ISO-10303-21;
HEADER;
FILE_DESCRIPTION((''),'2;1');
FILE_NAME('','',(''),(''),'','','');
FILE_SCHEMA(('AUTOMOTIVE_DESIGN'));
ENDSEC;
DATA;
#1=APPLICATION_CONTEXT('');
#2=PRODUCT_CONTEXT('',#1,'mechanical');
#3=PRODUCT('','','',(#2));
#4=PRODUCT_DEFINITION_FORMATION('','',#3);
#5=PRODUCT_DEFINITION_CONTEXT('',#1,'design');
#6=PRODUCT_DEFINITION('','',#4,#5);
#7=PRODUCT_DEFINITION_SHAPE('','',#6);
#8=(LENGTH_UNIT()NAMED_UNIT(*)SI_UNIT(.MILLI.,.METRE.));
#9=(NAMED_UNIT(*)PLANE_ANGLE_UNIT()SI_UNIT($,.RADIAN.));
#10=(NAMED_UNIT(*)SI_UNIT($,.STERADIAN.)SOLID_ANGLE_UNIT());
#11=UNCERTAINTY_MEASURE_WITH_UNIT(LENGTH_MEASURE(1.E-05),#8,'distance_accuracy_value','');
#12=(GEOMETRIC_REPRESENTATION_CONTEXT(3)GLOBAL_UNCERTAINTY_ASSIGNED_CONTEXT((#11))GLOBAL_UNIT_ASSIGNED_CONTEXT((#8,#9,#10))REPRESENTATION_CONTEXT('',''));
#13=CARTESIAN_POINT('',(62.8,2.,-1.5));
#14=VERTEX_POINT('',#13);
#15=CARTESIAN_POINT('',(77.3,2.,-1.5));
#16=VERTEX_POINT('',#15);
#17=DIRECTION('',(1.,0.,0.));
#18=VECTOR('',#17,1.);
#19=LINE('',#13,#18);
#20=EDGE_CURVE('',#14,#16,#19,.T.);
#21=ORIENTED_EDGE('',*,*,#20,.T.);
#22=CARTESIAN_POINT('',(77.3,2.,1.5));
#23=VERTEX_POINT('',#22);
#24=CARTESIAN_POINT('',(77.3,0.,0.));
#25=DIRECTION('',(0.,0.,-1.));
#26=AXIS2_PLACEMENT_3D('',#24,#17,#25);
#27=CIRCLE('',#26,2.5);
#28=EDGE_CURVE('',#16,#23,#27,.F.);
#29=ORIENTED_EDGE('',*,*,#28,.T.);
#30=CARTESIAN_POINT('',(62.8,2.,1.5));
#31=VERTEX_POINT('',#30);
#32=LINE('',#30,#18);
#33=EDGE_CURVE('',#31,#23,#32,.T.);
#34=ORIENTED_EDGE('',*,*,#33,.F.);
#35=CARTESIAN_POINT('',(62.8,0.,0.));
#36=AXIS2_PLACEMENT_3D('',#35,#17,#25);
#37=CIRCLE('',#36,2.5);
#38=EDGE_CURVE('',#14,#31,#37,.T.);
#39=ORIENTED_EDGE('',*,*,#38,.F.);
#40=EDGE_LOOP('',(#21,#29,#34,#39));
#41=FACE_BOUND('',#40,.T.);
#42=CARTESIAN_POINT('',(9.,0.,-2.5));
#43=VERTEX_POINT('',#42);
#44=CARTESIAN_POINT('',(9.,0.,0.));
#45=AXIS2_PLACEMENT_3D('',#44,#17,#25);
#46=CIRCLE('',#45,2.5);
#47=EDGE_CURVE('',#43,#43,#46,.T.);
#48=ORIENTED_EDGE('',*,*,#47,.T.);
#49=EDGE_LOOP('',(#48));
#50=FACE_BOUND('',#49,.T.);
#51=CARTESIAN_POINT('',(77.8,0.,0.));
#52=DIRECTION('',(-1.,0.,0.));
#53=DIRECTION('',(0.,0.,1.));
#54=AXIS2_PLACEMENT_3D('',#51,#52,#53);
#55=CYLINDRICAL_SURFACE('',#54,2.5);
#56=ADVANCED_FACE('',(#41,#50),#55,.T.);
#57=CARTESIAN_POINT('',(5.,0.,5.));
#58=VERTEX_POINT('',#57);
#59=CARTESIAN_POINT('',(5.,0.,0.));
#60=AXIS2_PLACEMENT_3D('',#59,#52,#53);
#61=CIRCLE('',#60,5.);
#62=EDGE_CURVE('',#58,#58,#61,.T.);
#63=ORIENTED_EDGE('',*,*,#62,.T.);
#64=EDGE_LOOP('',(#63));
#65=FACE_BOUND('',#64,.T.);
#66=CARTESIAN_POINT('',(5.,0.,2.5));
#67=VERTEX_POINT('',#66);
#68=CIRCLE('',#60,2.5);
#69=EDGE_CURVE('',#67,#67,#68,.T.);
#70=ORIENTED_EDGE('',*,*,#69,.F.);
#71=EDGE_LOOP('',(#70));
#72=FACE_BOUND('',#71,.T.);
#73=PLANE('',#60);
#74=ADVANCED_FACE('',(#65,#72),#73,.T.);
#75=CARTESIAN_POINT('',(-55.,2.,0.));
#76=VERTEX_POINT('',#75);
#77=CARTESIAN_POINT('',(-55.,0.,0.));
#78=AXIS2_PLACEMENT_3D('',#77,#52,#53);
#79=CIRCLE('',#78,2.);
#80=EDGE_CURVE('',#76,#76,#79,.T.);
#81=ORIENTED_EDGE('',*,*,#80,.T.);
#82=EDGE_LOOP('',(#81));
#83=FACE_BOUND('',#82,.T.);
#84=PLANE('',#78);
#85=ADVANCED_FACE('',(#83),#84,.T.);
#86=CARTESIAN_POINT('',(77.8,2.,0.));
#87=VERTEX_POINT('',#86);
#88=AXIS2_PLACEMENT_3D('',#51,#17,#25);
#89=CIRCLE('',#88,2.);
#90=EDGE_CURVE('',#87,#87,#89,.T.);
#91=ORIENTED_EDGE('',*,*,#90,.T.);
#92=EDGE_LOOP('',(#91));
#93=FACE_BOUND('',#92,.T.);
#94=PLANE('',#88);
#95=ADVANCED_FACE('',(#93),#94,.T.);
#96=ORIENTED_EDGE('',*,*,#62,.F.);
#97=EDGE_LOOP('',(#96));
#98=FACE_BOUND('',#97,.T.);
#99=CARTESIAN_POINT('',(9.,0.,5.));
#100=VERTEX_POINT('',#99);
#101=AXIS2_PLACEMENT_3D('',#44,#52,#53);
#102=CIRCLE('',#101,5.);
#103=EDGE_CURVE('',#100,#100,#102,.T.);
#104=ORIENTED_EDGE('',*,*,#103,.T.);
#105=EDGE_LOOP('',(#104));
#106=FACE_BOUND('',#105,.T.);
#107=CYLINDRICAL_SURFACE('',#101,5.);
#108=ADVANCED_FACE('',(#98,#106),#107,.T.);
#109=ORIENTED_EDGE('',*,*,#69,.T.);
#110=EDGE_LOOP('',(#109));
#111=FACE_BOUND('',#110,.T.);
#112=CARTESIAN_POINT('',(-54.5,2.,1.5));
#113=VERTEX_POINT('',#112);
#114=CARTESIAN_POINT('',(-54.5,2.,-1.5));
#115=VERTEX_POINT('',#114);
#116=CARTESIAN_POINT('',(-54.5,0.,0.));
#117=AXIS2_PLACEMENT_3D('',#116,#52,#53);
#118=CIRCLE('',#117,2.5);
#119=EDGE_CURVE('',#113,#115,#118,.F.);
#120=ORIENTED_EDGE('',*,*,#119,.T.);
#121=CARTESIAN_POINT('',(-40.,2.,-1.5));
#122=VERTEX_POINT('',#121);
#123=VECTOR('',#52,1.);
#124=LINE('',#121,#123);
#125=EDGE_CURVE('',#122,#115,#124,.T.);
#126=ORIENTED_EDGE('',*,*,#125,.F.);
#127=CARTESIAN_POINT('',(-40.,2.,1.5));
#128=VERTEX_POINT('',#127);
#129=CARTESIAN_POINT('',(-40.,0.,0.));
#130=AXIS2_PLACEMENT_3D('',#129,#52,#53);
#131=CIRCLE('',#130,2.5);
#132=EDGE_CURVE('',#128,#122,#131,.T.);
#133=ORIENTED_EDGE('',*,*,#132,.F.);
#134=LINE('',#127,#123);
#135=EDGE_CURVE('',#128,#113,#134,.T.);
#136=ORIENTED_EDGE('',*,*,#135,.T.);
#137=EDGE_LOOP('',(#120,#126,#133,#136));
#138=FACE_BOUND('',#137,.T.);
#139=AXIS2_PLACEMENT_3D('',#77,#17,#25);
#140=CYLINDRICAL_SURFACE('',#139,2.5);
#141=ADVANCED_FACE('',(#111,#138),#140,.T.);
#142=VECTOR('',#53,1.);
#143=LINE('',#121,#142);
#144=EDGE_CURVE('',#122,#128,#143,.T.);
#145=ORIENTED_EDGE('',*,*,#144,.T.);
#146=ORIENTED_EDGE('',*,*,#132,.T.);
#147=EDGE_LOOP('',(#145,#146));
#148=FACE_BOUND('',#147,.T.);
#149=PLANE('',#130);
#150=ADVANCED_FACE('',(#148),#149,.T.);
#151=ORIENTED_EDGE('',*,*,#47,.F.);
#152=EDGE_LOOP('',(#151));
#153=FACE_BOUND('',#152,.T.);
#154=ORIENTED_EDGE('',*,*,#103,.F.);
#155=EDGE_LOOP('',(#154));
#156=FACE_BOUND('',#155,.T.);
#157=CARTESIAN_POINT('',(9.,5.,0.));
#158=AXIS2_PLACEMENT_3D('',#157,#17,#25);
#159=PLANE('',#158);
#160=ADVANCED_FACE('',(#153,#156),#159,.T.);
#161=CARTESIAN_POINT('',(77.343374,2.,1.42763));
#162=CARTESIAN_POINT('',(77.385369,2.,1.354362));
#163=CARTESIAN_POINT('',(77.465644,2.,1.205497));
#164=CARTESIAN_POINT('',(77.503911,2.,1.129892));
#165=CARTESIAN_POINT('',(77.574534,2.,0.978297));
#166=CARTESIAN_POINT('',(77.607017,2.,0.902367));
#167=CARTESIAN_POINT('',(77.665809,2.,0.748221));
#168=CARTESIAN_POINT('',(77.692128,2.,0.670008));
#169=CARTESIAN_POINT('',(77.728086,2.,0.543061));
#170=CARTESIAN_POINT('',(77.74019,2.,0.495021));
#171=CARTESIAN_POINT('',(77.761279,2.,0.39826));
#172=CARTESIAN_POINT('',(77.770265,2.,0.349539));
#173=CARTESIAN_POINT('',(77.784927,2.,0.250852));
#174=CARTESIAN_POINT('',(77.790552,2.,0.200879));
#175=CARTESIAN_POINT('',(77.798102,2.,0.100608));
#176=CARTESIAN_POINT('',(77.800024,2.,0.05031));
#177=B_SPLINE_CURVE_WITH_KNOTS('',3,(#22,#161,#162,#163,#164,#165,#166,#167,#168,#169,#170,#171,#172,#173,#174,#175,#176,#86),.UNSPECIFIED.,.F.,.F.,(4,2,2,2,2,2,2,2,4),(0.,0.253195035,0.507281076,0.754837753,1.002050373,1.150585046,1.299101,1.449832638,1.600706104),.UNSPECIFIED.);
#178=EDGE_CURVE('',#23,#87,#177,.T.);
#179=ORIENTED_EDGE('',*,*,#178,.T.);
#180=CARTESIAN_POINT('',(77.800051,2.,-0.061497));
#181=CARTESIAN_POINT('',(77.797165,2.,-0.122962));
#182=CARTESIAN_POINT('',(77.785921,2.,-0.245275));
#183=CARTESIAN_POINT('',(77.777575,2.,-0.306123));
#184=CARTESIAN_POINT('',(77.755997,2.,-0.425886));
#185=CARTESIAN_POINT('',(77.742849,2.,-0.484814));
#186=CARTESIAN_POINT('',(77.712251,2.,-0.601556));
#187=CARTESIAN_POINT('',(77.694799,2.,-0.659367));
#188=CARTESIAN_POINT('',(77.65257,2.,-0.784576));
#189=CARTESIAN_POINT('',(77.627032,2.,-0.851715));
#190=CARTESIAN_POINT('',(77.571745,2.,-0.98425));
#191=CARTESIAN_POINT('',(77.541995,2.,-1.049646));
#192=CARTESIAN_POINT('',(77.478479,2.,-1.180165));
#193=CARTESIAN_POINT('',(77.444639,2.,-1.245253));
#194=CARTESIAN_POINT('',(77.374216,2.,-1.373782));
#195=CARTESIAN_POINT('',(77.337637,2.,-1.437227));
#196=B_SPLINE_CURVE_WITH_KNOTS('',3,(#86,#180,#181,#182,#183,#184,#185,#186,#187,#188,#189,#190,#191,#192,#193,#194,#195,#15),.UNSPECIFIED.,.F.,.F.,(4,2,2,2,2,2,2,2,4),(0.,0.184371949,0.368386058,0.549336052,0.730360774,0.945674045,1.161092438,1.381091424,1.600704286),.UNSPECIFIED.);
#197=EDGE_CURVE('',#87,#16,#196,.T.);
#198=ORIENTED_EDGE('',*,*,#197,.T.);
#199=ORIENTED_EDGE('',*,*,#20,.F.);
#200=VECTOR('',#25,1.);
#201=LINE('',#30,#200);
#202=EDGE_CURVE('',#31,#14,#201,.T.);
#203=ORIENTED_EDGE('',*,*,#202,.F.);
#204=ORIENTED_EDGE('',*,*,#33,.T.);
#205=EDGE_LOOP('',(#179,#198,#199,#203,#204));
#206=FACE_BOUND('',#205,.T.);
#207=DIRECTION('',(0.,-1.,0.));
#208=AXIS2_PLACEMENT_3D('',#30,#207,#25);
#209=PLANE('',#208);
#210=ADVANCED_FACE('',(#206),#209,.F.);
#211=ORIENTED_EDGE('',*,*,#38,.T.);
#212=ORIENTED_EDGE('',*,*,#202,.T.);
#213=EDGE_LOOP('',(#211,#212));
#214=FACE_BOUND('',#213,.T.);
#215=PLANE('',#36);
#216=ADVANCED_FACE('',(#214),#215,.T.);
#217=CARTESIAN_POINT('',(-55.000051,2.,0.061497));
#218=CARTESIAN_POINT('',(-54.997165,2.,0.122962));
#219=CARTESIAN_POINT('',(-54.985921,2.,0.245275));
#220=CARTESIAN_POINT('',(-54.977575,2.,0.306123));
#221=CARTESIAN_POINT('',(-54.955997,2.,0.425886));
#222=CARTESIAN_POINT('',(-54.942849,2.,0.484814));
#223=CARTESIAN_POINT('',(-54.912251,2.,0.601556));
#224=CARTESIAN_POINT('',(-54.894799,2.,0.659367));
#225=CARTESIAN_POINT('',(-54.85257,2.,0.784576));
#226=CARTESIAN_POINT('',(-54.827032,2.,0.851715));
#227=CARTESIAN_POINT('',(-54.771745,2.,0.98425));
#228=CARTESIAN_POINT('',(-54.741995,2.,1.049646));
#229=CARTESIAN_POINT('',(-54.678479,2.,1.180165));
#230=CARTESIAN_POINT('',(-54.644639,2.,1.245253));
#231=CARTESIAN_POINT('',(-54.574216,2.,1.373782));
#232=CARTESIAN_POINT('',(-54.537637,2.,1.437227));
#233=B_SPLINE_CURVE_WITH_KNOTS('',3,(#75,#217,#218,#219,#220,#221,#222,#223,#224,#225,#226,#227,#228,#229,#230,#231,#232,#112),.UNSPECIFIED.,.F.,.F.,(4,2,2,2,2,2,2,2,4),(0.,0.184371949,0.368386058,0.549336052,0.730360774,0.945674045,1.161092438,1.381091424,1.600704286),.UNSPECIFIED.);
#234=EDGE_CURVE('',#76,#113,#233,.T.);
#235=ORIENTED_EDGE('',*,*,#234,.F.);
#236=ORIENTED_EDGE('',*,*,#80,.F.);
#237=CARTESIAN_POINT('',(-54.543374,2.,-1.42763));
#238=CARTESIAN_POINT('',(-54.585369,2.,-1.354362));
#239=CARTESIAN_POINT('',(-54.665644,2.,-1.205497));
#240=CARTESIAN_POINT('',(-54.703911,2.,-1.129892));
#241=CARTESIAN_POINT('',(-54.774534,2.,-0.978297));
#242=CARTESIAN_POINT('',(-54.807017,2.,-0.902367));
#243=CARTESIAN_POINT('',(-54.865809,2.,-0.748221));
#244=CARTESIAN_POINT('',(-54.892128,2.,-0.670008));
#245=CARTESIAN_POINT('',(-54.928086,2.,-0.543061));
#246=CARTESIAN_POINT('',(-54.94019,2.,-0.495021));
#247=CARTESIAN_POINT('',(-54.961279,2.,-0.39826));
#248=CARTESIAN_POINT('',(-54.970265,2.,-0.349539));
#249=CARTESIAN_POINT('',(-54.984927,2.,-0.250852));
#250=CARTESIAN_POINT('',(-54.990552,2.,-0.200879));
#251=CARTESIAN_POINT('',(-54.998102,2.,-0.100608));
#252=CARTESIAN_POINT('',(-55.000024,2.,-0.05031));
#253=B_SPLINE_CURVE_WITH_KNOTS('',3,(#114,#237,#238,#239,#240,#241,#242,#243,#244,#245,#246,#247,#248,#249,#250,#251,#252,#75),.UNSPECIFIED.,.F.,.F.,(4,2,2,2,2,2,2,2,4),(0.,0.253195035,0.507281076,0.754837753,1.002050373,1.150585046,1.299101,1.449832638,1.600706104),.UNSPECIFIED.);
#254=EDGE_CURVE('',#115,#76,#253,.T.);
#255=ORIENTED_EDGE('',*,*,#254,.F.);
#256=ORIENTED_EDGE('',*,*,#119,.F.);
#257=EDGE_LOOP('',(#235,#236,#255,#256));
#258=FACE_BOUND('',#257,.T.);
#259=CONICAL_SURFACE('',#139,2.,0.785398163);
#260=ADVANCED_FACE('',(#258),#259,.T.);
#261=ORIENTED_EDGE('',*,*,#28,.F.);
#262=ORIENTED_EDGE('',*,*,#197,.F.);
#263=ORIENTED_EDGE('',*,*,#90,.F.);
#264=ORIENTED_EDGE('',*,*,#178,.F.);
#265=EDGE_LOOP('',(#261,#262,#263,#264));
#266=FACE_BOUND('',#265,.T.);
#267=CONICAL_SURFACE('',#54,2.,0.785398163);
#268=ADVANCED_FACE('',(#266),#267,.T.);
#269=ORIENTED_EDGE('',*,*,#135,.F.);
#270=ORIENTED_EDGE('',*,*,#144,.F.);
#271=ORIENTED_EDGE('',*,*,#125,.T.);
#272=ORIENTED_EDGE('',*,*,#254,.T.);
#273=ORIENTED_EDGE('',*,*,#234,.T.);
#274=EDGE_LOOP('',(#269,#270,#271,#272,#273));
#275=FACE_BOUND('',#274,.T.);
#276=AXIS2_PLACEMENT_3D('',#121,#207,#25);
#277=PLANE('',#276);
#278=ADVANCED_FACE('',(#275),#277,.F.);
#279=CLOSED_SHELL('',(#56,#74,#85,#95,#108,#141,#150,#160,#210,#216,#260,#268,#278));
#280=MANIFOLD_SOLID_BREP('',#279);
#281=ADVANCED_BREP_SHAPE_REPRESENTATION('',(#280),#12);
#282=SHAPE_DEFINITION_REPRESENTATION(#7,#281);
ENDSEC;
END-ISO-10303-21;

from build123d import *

# Parameters (mm, degrees)
SKETCH1_W           = 4
SKETCH1_H           = 5
SKETCH2_R           = 2.5
BOSS_EXTRUDE1_DEPTH = 68.8
CUT_EXTRUDE1_START  = -15
CUT_EXTRUDE1_DEPTH  = 15
BOSS_EXTRUDE2_START = 60
SKETCH4_R           = 2.5
BOSS_EXTRUDE2_DEPTH = 60
CUT_EXTRUDE2_DEPTH  = 15
CHAMFER1_SIZE       = 0.5


with BuildPart() as part:
    # Sketch1 → Revolve1 (revolve)
    with BuildSketch(Plane(origin=(0, 0, 0), x_dir=(-1, 0, 0), z_dir=(0, 0, -1)), mode=Mode.PRIVATE) as revolve1_sk:
        with Locations((-7, 2.5)):
            Rectangle(SKETCH1_W, SKETCH1_H)
    revolve(revolve1_sk.sketch.rotate(Axis((9, 0, 0), (-1, 0, 0)), 270), axis=Axis((9, 0, 0), (-1, 0, 0)))

    # Sketch2 → Boss-Extrude1 (add)
    with BuildSketch(Plane(origin=(9, 0, 0), x_dir=(0, 0, -1), z_dir=(1, 0, 0))):
        with Locations(Location((0, 0, 0), (0, 0, 180))):
            Circle(SKETCH2_R)
    extrude(amount=BOSS_EXTRUDE1_DEPTH)

    # Sketch3 → Cut-Extrude1 (cut)
    with BuildSketch(Plane(origin=(77.8, 0, 0), x_dir=(0, 0, -1), z_dir=(1, 0, 0)).offset(CUT_EXTRUDE1_START)):
        with BuildLine():
            Line((-1.5, 2), (1.5, 2))
            ThreePointArc((1.5, 2), (0, 2.5), (-1.5, 2))
        make_face()
    extrude(amount=CUT_EXTRUDE1_DEPTH, mode=Mode.SUBTRACT)

    # Sketch4 → Boss-Extrude2 (add)
    with BuildSketch(Plane.ZY.offset(-5).offset(BOSS_EXTRUDE2_START)):
        with Locations(Location((0, 0, 0), (0, 0, 53.130102354))):
            Circle(SKETCH4_R)
    extrude(amount=-BOSS_EXTRUDE2_DEPTH)

    # Sketch5 → Cut-Extrude2 (cut)
    with BuildSketch(Plane.ZY.offset(55)):
        with BuildLine():
            Line((-1.5, 2), (1.5, 2))
            ThreePointArc((1.5, 2), (0, 2.5), (-1.5, 2))
        make_face()
    extrude(amount=-CUT_EXTRUDE2_DEPTH, mode=Mode.SUBTRACT)

    # Chamfer1
    chamfer1_edges = [part.edges().sort_by_distance(p)[0] for p in [
        (-55, -2.5, 0),
        (77.8, -2.236067977, -1.118033989),
    ]]
    chamfer(chamfer1_edges, length=CHAMFER1_SIZE - 0.0001)  # a hair under: the kernel refuses the full size


solid = part.part
